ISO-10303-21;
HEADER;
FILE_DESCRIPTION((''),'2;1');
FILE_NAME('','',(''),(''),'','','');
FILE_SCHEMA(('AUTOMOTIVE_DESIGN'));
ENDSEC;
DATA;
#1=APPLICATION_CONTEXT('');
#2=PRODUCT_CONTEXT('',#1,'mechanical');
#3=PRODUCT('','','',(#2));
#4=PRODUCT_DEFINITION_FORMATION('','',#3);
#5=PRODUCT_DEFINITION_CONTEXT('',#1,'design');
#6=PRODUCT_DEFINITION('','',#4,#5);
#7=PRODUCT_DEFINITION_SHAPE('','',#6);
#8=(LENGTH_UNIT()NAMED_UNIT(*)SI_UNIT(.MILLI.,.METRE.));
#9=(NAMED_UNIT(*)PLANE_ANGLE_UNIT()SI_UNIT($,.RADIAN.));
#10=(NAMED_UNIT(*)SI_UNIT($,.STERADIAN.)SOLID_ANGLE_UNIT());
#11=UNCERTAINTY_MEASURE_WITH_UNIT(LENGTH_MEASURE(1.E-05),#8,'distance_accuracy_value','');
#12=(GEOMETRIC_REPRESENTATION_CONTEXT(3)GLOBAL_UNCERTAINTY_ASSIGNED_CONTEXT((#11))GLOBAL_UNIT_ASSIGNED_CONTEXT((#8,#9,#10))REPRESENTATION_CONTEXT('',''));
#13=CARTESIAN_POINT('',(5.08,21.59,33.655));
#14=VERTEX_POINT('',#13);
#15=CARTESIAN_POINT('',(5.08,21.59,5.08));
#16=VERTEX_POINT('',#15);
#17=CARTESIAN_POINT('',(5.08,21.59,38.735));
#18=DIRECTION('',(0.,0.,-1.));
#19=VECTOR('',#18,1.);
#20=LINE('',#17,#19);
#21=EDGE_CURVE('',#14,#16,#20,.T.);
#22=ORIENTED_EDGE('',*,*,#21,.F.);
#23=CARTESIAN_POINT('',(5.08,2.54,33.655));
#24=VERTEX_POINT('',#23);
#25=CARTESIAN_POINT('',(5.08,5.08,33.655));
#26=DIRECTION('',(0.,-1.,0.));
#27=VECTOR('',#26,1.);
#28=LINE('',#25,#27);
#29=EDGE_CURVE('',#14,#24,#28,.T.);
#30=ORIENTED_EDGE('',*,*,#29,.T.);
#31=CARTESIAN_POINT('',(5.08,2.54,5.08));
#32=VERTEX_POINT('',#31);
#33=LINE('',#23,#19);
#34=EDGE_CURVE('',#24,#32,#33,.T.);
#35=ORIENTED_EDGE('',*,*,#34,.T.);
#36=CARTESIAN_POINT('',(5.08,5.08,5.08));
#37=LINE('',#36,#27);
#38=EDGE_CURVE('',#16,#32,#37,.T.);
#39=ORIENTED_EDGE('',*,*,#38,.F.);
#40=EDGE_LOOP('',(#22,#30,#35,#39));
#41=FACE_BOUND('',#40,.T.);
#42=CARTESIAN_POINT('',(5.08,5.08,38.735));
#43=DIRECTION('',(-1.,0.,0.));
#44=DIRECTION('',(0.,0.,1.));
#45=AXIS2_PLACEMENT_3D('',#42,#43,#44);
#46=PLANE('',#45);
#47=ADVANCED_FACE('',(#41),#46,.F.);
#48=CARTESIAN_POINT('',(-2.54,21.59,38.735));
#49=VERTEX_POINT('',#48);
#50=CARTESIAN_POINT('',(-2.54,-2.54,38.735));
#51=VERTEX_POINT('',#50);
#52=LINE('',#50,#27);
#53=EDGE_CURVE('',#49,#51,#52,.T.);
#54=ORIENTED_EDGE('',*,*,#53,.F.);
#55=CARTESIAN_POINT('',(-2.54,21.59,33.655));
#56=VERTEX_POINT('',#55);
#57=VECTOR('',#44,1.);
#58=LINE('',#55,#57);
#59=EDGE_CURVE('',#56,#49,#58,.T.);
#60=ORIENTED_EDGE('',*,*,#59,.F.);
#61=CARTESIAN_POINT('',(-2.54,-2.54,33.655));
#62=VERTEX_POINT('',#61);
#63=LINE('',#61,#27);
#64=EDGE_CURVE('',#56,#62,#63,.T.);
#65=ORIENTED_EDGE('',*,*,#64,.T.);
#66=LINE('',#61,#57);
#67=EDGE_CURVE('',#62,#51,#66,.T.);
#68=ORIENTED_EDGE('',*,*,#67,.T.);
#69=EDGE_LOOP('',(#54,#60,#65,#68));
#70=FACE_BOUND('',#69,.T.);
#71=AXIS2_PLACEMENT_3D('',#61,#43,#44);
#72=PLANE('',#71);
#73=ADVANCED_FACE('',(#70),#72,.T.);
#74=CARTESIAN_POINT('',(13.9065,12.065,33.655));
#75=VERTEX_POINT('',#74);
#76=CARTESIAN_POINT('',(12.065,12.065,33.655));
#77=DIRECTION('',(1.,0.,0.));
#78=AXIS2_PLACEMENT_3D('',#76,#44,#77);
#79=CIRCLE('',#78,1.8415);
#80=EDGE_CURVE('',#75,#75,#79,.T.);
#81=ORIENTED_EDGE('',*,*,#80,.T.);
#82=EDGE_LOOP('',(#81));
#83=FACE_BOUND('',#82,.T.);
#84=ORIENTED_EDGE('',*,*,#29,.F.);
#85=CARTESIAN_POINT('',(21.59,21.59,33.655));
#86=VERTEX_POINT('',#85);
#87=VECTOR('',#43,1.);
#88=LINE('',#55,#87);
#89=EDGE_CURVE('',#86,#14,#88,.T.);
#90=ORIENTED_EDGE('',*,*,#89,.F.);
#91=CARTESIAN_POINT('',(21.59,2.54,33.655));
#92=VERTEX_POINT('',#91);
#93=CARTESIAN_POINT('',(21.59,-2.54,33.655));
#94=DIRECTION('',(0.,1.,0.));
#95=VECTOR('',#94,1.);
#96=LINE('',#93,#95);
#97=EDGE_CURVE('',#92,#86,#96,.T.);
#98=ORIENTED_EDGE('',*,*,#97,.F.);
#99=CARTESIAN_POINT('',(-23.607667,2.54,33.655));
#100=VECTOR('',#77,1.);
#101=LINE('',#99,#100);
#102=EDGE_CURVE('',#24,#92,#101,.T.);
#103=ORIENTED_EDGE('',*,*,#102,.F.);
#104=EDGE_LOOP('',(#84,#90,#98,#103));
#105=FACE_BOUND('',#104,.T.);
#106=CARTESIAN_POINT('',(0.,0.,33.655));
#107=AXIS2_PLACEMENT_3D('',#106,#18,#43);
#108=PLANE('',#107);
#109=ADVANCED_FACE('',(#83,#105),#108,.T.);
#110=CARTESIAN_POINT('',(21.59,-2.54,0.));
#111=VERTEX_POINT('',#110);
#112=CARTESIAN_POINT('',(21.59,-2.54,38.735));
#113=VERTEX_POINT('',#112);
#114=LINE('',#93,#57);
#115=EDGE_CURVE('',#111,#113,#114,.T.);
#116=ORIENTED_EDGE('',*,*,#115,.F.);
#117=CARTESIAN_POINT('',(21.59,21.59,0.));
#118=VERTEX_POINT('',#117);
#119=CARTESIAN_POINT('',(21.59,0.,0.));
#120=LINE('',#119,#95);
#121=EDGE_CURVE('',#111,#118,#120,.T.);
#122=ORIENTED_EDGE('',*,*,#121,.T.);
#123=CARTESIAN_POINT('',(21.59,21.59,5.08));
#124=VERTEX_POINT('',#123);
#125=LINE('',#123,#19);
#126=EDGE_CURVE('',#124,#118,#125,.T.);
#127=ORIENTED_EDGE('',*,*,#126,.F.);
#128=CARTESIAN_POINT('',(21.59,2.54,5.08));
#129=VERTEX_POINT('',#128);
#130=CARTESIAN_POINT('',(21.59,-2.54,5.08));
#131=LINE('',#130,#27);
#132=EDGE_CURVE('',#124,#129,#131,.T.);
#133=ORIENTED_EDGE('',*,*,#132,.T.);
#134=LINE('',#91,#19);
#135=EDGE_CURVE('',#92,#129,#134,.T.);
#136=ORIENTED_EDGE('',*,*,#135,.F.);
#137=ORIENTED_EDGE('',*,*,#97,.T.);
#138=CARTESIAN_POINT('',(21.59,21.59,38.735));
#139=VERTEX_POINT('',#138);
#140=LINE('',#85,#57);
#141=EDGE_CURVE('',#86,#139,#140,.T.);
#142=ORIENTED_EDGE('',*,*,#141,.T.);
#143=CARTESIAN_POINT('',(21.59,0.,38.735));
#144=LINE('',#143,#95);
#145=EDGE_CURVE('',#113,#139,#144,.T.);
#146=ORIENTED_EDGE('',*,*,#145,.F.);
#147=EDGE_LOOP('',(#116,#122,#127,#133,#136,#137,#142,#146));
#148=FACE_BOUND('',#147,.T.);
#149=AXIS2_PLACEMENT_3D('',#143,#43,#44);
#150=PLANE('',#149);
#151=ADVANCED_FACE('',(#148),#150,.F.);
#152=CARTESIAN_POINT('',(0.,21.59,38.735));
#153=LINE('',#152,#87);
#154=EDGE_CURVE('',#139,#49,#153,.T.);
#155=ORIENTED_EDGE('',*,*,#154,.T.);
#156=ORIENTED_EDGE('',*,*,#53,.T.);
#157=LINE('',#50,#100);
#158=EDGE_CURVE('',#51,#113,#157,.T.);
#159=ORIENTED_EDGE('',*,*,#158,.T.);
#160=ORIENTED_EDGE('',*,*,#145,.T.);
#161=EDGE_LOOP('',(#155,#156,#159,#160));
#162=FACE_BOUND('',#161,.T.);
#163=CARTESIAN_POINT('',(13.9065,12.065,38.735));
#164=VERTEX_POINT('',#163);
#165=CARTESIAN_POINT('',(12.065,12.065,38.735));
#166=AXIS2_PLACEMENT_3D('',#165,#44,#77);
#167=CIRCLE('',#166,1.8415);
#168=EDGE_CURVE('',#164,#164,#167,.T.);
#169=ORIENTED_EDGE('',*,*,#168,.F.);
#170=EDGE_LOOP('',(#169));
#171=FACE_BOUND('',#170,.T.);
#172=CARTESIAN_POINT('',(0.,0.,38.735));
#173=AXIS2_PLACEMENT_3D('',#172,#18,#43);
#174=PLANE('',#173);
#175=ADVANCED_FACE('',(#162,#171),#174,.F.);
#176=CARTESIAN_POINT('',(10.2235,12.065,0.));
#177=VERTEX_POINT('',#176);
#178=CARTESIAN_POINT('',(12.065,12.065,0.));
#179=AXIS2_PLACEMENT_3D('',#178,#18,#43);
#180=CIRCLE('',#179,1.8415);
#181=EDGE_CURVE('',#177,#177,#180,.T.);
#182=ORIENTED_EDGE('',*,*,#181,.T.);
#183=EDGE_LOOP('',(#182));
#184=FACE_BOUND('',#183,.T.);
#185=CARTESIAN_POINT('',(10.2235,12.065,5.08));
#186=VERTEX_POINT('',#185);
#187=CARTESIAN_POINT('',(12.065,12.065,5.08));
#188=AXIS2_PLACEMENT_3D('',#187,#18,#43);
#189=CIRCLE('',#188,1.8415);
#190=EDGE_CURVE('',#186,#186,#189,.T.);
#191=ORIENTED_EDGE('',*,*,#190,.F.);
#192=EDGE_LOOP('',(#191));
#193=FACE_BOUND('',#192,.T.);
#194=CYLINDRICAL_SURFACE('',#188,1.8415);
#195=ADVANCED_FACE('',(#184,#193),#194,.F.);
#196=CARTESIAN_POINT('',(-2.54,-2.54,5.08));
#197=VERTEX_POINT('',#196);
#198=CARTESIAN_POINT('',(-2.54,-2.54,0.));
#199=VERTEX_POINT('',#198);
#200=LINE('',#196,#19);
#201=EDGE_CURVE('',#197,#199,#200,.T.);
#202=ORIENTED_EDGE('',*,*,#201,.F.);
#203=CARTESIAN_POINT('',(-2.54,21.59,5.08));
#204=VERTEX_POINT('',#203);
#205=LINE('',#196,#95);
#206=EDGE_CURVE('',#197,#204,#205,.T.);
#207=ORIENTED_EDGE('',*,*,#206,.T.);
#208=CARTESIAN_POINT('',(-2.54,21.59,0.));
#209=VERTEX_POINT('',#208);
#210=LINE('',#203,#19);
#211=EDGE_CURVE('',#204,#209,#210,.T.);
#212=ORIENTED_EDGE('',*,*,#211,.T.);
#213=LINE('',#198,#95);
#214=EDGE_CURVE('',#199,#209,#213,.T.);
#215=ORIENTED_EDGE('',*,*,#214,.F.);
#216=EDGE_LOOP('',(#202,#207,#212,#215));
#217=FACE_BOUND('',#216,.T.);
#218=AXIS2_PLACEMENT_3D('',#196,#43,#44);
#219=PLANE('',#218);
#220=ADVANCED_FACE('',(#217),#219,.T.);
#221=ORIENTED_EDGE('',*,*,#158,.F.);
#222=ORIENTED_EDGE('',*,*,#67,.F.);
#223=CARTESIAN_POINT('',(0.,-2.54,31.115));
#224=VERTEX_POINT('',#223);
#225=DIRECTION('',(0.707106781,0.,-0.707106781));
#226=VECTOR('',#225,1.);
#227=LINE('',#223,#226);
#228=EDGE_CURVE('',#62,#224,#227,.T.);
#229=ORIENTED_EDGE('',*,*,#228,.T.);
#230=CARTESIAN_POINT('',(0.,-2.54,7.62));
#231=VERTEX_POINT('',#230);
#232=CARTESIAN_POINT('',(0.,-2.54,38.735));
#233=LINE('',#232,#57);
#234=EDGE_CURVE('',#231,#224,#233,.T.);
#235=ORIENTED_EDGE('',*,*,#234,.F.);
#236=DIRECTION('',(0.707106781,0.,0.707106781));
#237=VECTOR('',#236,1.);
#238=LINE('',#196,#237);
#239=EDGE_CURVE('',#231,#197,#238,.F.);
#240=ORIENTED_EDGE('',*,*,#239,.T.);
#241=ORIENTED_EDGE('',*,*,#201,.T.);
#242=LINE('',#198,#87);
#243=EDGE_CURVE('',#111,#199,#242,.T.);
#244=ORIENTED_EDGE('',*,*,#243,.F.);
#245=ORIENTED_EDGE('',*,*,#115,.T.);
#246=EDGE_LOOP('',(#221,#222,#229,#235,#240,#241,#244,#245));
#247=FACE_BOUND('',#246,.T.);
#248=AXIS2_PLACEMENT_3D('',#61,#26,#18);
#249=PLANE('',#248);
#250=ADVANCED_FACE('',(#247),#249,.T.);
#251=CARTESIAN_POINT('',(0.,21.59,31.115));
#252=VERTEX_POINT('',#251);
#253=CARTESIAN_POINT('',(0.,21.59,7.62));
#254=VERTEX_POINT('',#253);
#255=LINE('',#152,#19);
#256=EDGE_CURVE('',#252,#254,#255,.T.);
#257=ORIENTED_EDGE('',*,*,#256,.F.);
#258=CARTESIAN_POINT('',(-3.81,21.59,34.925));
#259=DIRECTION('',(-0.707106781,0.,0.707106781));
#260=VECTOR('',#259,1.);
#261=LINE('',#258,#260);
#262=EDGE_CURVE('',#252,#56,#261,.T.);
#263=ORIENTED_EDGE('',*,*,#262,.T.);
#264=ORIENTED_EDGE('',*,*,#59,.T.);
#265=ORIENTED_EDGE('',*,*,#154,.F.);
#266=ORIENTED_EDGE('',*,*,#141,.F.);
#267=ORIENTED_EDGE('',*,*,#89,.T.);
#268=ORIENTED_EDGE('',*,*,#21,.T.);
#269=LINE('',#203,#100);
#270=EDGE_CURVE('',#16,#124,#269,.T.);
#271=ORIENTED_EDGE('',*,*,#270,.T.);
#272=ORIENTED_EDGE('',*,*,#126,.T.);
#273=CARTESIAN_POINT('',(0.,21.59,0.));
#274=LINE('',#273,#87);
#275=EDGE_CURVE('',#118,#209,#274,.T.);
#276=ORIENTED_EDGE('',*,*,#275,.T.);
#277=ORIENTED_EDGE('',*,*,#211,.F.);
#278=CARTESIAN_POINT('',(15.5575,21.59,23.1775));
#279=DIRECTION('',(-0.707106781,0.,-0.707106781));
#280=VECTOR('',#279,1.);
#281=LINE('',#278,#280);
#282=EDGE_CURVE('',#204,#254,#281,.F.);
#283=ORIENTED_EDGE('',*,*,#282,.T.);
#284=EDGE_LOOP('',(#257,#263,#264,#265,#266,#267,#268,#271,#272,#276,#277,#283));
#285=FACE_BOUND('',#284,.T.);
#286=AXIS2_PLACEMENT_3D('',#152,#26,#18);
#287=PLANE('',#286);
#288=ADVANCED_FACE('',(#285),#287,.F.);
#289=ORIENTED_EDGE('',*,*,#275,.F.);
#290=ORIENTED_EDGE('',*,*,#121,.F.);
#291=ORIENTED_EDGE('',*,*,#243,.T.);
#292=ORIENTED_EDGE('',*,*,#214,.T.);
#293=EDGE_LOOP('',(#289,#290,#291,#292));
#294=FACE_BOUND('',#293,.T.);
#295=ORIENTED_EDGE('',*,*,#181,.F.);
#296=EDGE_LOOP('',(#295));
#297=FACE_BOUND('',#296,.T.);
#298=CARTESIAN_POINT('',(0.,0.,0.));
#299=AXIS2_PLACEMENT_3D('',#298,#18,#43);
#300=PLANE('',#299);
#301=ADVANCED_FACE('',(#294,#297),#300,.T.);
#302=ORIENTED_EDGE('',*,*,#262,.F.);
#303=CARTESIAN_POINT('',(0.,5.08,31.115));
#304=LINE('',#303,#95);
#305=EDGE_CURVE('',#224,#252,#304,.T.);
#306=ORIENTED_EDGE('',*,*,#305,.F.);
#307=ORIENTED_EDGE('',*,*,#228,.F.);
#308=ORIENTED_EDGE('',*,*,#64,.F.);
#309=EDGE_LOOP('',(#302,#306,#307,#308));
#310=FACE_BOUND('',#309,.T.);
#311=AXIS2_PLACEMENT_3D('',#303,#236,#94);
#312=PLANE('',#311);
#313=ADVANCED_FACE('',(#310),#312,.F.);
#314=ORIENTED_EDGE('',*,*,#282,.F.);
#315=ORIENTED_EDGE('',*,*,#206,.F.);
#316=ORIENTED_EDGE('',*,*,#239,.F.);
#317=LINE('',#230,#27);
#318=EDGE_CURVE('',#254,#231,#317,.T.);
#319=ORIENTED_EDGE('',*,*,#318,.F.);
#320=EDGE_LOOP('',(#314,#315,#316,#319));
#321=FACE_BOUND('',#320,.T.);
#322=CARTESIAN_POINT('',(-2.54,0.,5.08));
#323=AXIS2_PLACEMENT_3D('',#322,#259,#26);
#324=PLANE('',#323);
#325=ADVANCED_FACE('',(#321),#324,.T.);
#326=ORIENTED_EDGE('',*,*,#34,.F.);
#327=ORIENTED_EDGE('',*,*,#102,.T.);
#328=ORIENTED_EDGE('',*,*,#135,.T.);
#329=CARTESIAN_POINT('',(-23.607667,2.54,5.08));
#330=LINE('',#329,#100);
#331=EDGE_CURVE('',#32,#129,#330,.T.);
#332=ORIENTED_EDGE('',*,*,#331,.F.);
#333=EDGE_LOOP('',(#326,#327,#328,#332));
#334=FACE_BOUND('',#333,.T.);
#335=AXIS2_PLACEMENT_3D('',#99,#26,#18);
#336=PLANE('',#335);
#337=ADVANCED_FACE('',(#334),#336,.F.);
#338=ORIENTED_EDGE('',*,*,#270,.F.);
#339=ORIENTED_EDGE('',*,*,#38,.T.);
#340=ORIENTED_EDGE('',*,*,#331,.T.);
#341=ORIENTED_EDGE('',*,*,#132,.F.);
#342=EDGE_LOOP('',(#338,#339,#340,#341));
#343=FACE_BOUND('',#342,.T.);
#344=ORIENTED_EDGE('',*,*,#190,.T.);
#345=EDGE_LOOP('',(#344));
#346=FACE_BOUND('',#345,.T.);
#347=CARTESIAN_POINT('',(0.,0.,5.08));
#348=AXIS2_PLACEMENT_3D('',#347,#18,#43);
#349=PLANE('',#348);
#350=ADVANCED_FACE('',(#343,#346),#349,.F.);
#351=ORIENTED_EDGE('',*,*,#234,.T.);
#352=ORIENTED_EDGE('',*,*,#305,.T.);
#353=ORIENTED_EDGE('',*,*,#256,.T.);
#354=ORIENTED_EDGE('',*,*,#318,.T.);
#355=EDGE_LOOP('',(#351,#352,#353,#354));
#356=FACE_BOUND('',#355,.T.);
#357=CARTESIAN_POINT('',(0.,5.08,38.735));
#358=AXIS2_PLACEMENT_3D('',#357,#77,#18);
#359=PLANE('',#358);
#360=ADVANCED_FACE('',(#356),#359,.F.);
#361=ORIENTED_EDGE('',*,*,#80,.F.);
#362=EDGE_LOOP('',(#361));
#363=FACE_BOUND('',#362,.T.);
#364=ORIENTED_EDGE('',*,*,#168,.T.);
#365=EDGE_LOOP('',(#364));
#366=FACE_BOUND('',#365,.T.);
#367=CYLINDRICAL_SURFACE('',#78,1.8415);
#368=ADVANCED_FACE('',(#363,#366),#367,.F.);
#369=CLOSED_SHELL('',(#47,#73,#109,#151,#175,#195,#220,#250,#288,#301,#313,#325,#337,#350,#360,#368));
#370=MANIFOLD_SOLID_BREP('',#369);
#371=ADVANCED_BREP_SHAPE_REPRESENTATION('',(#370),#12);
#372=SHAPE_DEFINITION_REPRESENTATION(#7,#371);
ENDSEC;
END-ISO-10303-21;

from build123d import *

# Parameters (mm, degrees)
BOSS_EXTRUDE1_DEPTH = 38.735
SKETCH2_W           = 24.13
SKETCH2_H           = 24.13
SKETCH2_R           = 1.8415
BOSS_EXTRUDE2_DEPTH = 5.08
BOSS_EXTRUDE3_START = -5.08
SKETCH3_W           = 24.13
SKETCH3_H           = 24.13
SKETCH3_R           = 1.8415
BOSS_EXTRUDE3_DEPTH = 5.08
SKETCH4_W           = 38.735
SKETCH4_H           = 5.875923506
BOSS_EXTRUDE5_DEPTH = 21.59
SKETCH5_W           = 28.575
SKETCH5_H           = 2.54
CUT_EXTRUDE1_DEPTH  = 16.51
CHAMFER2_SIZE       = 2.54


with BuildPart() as part:
    # Sketch1 → Boss-Extrude1 (new body)
    with BuildSketch(Plane.XY):
        Polygon((0, 0), (21.59, 0), (21.59, 5.08), (5.08, 5.08), (5.08, 21.59), (0, 21.59), (0, 5.08), align=None)
    extrude(amount=BOSS_EXTRUDE1_DEPTH)

    # Sketch2 → Boss-Extrude2 (add)
    with BuildSketch(Plane.XY.offset(38.735)):
        with Locations((9.525, 9.525)):
            Rectangle(SKETCH2_W, SKETCH2_H)
        with Locations((12.065, 12.065)):
            Circle(SKETCH2_R, mode=Mode.SUBTRACT)
    extrude(amount=-BOSS_EXTRUDE2_DEPTH)

    # Sketch3 → Boss-Extrude3 (add)
    with BuildSketch(Plane(origin=(0, 0, 0), x_dir=(-1, 0, 0), z_dir=(0, 0, -1)).offset(BOSS_EXTRUDE3_START)):
        with Locations((-9.525, 9.525)):
            Rectangle(SKETCH3_W, SKETCH3_H)
        with Locations(Location((-12.065, 12.065, 0), (0, 0, 180))):
            Circle(SKETCH3_R, mode=Mode.SUBTRACT)
    extrude(amount=BOSS_EXTRUDE3_DEPTH)

    # Sketch4 → Boss-Extrude5 (add)
    with BuildSketch(Plane(origin=(21.59, 0, 0), x_dir=(0, 0, -1), z_dir=(1, 0, 0))):
        with Locations((-19.3675, 0.397961753)):
            Rectangle(SKETCH4_W, SKETCH4_H)
    extrude(amount=-BOSS_EXTRUDE5_DEPTH)

    # Sketch5 → Cut-Extrude1 (cut)
    with BuildSketch(Plane(origin=(21.59, 0, 0), x_dir=(0, 0, -1), z_dir=(1, 0, 0))):
        with Locations((-19.3675, 3.81)):
            Rectangle(SKETCH5_W, SKETCH5_H)
    extrude(amount=-CUT_EXTRUDE1_DEPTH, mode=Mode.SUBTRACT)

    # Chamfer2
    chamfer2_edges = [part.edges().sort_by_distance(p)[0] for p in [
        (0, 9.525, 33.655),
        (0, 9.525, 5.08),
    ]]
    chamfer(chamfer2_edges, length=CHAMFER2_SIZE - 0.0001)  # a hair under: the kernel refuses the full size


solid = part.part
